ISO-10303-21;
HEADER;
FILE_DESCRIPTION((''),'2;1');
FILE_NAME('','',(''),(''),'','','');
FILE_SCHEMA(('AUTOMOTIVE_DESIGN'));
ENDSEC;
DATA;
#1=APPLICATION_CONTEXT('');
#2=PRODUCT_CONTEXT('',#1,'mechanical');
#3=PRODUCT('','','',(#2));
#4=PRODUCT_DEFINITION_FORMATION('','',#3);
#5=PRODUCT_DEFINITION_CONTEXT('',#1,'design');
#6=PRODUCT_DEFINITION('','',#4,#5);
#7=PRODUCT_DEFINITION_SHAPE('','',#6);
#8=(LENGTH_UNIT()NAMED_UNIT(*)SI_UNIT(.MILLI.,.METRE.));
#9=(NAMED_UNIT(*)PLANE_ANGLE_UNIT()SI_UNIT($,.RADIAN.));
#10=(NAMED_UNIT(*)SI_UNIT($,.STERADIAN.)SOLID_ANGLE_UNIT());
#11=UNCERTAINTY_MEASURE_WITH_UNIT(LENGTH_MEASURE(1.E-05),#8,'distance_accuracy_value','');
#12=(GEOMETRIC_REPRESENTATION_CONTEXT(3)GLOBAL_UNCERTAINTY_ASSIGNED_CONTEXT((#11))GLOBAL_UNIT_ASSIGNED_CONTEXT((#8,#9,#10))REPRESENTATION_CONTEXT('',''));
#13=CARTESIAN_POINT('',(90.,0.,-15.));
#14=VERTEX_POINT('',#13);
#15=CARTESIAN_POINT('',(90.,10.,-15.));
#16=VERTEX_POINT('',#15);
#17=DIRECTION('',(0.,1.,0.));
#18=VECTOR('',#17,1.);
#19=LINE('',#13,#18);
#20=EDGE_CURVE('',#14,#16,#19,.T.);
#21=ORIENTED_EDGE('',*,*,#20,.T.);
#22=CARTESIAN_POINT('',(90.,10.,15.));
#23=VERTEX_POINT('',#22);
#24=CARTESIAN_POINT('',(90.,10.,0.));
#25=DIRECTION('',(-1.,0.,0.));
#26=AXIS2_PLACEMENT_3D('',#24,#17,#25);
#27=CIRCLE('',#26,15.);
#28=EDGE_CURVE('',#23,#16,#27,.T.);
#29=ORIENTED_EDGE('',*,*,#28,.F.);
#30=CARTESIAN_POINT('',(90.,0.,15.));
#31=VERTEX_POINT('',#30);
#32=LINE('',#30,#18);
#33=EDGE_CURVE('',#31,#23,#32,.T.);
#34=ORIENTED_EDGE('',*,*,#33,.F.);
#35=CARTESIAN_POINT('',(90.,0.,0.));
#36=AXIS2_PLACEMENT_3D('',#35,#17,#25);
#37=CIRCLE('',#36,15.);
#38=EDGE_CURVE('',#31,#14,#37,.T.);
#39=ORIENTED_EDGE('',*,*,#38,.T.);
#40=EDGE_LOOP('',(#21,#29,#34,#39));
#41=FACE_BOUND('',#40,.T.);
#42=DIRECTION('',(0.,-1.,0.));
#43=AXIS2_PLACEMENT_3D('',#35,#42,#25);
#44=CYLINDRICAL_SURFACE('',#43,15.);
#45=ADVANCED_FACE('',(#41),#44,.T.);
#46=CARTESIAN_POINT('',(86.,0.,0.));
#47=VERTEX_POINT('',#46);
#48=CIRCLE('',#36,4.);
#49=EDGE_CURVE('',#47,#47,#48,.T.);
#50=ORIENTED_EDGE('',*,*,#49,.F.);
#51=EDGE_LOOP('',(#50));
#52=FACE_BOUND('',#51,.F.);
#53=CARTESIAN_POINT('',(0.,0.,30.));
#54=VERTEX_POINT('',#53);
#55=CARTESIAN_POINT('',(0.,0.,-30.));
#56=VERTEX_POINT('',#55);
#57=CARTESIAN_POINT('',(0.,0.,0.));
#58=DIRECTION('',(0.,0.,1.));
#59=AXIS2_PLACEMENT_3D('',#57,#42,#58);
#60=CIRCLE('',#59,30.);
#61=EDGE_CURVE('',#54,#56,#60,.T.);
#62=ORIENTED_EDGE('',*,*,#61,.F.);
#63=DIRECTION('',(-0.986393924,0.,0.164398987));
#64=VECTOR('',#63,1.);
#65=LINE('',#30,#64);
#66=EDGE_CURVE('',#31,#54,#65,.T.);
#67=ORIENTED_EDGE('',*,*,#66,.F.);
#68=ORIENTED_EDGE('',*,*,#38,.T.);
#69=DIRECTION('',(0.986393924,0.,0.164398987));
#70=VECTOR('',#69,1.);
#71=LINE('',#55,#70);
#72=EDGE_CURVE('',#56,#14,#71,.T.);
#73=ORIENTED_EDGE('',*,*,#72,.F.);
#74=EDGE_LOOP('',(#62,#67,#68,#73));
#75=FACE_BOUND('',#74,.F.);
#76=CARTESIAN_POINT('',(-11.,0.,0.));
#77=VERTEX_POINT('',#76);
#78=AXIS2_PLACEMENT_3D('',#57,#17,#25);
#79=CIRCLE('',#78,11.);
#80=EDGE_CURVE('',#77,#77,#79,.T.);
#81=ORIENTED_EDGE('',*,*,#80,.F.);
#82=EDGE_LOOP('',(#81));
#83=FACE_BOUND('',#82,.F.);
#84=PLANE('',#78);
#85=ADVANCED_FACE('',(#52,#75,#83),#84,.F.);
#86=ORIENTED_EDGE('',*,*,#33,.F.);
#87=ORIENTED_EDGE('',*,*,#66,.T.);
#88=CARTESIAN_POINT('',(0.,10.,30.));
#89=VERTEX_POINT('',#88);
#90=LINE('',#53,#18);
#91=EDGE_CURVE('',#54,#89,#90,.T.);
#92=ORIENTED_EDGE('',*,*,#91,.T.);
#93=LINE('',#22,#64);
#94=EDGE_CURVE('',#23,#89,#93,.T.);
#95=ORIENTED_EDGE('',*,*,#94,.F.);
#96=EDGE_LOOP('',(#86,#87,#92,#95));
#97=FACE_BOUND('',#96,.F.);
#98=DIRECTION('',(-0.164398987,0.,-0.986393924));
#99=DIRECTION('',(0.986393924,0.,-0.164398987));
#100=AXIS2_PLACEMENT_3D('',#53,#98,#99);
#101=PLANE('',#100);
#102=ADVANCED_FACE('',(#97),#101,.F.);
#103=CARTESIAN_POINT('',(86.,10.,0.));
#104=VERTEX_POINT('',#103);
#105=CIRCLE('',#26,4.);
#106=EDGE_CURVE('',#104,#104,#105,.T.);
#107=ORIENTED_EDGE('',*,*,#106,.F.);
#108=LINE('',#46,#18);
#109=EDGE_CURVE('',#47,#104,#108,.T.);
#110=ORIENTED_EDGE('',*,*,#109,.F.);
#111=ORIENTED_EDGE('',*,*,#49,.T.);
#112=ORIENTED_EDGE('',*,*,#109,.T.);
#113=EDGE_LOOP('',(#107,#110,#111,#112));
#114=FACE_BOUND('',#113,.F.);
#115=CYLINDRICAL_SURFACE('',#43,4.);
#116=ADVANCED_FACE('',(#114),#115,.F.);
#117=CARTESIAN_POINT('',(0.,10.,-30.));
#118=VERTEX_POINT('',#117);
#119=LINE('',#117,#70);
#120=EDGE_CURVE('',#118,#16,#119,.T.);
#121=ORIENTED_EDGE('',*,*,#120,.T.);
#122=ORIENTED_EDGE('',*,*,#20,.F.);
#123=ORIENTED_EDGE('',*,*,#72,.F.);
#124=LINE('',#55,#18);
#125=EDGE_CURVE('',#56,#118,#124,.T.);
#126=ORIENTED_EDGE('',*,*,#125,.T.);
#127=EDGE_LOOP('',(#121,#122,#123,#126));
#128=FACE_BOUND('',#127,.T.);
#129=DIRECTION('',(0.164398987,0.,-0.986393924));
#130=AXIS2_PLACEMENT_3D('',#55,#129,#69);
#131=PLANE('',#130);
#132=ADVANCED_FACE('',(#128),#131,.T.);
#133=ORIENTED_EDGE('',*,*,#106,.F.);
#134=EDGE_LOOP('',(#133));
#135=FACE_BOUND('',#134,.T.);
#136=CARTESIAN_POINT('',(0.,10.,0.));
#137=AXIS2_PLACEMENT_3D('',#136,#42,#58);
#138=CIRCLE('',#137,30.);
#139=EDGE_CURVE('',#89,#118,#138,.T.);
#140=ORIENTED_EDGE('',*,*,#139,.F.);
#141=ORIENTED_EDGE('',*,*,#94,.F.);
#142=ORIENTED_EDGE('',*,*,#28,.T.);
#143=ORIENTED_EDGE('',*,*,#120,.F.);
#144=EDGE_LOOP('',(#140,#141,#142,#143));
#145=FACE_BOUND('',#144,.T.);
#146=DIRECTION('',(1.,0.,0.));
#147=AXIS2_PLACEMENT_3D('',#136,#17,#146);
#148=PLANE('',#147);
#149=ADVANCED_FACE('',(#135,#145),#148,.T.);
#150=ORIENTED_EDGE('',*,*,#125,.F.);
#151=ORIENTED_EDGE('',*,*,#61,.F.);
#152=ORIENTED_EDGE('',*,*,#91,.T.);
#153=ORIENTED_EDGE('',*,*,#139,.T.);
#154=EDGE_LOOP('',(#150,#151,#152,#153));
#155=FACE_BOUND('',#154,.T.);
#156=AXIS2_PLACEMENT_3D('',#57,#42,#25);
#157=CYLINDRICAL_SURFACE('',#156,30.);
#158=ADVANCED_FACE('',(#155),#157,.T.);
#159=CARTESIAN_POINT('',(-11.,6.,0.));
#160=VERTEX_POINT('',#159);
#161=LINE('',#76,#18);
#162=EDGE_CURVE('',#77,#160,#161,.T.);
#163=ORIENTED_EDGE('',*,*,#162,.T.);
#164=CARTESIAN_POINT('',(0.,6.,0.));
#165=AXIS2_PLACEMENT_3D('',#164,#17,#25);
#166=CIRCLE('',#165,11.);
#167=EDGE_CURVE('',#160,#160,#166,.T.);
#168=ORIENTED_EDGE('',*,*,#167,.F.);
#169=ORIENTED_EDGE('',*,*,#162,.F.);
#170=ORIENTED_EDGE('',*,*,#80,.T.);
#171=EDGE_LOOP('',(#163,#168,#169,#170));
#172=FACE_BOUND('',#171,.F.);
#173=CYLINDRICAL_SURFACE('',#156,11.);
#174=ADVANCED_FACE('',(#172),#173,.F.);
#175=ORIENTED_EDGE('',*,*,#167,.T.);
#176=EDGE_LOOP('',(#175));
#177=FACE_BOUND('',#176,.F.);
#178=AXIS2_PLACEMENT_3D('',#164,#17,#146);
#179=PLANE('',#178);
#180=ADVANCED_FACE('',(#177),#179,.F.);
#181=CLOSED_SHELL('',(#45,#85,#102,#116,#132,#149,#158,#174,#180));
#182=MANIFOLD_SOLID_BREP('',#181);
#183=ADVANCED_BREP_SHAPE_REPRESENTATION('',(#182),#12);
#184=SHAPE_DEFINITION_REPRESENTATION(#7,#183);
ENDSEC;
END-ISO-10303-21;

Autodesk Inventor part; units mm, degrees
ref_plane "YZ Plane" through (0, 0, 0) normal (1, 0, 0) x (0, 1, 0)
ref_plane "XZ Plane" through (0, 0, 0) normal (0, 1, 0) x (-1, 0, 0)
ref_plane "XY Plane" through (0, 0, 0) normal (0, 0, 1) x (1, 0, 0)
sketch "Sketch1" plane through (0, 0, 0) normal (0, 1, 0) x (-1, 0, 0)
  circle A0 centre (0, 0) radius 22
  circle A1 centre (0, -22) radius 1.55
  circle A2 centre (0, -22) radius 3
  circle A3 centre (22, 0) radius 3
  circle A4 centre (22, 0) radius 1.55
  circle A5 centre (0, 22) radius 3
  circle A6 centre (0, 22) radius 1.55
  circle A7 centre (-22, 0) radius 3
  circle A8 centre (-22, 0) radius 1.55
  circle A9 centre (0, 0) radius 30
  circle A10 centre (-90, 0) radius 4
  circle A11 centre (-90, 0) radius 15
  line L0 (0, -30) -> (-90, -15)
  line L1 (0, 30) -> (-90, 15)
  circle A12 centre (0, 0) radius 5
  circle A13 centre (0, 0) radius 11
  dimension "d2" = 44
  dimension "d3" = 3.1
  dimension "d4" = 6
  dimension "d5" = 360
  dimension "d6" = 60
  dimension "d8" = 8
  dimension "d9" = 30
  dimension "d10" = 10
  dimension "d11" = 22
extrude "Extrusion1" add sketch "Sketch1" along normal blind 10 contours A0 A4 | A0 A4 | A4 A0 A3 | A0 A3 A4 | A3 A0 A2 A7 A5 | A5 A0 A6 | A0 A6 A5 | A2 A0 A1 | A0 A1 A2 | A6 A0 | A0 A6 | A1 A0 | A0 A1 | A7 A0 A8 | A0 A8 A7 | A8 A0 | A0 A8 | A9 L0 L1 | A9 L0 A11 L1 | A11
sketch "Sketch2" plane through (0, 10, 0) normal (0, 1, 0) x (1, 0, 0)
  circle A0 centre (0, 0) radius 11
  dimension "d14" = 22
extrude "Extrusion2" add sketch "Sketch2" against normal blind 4
